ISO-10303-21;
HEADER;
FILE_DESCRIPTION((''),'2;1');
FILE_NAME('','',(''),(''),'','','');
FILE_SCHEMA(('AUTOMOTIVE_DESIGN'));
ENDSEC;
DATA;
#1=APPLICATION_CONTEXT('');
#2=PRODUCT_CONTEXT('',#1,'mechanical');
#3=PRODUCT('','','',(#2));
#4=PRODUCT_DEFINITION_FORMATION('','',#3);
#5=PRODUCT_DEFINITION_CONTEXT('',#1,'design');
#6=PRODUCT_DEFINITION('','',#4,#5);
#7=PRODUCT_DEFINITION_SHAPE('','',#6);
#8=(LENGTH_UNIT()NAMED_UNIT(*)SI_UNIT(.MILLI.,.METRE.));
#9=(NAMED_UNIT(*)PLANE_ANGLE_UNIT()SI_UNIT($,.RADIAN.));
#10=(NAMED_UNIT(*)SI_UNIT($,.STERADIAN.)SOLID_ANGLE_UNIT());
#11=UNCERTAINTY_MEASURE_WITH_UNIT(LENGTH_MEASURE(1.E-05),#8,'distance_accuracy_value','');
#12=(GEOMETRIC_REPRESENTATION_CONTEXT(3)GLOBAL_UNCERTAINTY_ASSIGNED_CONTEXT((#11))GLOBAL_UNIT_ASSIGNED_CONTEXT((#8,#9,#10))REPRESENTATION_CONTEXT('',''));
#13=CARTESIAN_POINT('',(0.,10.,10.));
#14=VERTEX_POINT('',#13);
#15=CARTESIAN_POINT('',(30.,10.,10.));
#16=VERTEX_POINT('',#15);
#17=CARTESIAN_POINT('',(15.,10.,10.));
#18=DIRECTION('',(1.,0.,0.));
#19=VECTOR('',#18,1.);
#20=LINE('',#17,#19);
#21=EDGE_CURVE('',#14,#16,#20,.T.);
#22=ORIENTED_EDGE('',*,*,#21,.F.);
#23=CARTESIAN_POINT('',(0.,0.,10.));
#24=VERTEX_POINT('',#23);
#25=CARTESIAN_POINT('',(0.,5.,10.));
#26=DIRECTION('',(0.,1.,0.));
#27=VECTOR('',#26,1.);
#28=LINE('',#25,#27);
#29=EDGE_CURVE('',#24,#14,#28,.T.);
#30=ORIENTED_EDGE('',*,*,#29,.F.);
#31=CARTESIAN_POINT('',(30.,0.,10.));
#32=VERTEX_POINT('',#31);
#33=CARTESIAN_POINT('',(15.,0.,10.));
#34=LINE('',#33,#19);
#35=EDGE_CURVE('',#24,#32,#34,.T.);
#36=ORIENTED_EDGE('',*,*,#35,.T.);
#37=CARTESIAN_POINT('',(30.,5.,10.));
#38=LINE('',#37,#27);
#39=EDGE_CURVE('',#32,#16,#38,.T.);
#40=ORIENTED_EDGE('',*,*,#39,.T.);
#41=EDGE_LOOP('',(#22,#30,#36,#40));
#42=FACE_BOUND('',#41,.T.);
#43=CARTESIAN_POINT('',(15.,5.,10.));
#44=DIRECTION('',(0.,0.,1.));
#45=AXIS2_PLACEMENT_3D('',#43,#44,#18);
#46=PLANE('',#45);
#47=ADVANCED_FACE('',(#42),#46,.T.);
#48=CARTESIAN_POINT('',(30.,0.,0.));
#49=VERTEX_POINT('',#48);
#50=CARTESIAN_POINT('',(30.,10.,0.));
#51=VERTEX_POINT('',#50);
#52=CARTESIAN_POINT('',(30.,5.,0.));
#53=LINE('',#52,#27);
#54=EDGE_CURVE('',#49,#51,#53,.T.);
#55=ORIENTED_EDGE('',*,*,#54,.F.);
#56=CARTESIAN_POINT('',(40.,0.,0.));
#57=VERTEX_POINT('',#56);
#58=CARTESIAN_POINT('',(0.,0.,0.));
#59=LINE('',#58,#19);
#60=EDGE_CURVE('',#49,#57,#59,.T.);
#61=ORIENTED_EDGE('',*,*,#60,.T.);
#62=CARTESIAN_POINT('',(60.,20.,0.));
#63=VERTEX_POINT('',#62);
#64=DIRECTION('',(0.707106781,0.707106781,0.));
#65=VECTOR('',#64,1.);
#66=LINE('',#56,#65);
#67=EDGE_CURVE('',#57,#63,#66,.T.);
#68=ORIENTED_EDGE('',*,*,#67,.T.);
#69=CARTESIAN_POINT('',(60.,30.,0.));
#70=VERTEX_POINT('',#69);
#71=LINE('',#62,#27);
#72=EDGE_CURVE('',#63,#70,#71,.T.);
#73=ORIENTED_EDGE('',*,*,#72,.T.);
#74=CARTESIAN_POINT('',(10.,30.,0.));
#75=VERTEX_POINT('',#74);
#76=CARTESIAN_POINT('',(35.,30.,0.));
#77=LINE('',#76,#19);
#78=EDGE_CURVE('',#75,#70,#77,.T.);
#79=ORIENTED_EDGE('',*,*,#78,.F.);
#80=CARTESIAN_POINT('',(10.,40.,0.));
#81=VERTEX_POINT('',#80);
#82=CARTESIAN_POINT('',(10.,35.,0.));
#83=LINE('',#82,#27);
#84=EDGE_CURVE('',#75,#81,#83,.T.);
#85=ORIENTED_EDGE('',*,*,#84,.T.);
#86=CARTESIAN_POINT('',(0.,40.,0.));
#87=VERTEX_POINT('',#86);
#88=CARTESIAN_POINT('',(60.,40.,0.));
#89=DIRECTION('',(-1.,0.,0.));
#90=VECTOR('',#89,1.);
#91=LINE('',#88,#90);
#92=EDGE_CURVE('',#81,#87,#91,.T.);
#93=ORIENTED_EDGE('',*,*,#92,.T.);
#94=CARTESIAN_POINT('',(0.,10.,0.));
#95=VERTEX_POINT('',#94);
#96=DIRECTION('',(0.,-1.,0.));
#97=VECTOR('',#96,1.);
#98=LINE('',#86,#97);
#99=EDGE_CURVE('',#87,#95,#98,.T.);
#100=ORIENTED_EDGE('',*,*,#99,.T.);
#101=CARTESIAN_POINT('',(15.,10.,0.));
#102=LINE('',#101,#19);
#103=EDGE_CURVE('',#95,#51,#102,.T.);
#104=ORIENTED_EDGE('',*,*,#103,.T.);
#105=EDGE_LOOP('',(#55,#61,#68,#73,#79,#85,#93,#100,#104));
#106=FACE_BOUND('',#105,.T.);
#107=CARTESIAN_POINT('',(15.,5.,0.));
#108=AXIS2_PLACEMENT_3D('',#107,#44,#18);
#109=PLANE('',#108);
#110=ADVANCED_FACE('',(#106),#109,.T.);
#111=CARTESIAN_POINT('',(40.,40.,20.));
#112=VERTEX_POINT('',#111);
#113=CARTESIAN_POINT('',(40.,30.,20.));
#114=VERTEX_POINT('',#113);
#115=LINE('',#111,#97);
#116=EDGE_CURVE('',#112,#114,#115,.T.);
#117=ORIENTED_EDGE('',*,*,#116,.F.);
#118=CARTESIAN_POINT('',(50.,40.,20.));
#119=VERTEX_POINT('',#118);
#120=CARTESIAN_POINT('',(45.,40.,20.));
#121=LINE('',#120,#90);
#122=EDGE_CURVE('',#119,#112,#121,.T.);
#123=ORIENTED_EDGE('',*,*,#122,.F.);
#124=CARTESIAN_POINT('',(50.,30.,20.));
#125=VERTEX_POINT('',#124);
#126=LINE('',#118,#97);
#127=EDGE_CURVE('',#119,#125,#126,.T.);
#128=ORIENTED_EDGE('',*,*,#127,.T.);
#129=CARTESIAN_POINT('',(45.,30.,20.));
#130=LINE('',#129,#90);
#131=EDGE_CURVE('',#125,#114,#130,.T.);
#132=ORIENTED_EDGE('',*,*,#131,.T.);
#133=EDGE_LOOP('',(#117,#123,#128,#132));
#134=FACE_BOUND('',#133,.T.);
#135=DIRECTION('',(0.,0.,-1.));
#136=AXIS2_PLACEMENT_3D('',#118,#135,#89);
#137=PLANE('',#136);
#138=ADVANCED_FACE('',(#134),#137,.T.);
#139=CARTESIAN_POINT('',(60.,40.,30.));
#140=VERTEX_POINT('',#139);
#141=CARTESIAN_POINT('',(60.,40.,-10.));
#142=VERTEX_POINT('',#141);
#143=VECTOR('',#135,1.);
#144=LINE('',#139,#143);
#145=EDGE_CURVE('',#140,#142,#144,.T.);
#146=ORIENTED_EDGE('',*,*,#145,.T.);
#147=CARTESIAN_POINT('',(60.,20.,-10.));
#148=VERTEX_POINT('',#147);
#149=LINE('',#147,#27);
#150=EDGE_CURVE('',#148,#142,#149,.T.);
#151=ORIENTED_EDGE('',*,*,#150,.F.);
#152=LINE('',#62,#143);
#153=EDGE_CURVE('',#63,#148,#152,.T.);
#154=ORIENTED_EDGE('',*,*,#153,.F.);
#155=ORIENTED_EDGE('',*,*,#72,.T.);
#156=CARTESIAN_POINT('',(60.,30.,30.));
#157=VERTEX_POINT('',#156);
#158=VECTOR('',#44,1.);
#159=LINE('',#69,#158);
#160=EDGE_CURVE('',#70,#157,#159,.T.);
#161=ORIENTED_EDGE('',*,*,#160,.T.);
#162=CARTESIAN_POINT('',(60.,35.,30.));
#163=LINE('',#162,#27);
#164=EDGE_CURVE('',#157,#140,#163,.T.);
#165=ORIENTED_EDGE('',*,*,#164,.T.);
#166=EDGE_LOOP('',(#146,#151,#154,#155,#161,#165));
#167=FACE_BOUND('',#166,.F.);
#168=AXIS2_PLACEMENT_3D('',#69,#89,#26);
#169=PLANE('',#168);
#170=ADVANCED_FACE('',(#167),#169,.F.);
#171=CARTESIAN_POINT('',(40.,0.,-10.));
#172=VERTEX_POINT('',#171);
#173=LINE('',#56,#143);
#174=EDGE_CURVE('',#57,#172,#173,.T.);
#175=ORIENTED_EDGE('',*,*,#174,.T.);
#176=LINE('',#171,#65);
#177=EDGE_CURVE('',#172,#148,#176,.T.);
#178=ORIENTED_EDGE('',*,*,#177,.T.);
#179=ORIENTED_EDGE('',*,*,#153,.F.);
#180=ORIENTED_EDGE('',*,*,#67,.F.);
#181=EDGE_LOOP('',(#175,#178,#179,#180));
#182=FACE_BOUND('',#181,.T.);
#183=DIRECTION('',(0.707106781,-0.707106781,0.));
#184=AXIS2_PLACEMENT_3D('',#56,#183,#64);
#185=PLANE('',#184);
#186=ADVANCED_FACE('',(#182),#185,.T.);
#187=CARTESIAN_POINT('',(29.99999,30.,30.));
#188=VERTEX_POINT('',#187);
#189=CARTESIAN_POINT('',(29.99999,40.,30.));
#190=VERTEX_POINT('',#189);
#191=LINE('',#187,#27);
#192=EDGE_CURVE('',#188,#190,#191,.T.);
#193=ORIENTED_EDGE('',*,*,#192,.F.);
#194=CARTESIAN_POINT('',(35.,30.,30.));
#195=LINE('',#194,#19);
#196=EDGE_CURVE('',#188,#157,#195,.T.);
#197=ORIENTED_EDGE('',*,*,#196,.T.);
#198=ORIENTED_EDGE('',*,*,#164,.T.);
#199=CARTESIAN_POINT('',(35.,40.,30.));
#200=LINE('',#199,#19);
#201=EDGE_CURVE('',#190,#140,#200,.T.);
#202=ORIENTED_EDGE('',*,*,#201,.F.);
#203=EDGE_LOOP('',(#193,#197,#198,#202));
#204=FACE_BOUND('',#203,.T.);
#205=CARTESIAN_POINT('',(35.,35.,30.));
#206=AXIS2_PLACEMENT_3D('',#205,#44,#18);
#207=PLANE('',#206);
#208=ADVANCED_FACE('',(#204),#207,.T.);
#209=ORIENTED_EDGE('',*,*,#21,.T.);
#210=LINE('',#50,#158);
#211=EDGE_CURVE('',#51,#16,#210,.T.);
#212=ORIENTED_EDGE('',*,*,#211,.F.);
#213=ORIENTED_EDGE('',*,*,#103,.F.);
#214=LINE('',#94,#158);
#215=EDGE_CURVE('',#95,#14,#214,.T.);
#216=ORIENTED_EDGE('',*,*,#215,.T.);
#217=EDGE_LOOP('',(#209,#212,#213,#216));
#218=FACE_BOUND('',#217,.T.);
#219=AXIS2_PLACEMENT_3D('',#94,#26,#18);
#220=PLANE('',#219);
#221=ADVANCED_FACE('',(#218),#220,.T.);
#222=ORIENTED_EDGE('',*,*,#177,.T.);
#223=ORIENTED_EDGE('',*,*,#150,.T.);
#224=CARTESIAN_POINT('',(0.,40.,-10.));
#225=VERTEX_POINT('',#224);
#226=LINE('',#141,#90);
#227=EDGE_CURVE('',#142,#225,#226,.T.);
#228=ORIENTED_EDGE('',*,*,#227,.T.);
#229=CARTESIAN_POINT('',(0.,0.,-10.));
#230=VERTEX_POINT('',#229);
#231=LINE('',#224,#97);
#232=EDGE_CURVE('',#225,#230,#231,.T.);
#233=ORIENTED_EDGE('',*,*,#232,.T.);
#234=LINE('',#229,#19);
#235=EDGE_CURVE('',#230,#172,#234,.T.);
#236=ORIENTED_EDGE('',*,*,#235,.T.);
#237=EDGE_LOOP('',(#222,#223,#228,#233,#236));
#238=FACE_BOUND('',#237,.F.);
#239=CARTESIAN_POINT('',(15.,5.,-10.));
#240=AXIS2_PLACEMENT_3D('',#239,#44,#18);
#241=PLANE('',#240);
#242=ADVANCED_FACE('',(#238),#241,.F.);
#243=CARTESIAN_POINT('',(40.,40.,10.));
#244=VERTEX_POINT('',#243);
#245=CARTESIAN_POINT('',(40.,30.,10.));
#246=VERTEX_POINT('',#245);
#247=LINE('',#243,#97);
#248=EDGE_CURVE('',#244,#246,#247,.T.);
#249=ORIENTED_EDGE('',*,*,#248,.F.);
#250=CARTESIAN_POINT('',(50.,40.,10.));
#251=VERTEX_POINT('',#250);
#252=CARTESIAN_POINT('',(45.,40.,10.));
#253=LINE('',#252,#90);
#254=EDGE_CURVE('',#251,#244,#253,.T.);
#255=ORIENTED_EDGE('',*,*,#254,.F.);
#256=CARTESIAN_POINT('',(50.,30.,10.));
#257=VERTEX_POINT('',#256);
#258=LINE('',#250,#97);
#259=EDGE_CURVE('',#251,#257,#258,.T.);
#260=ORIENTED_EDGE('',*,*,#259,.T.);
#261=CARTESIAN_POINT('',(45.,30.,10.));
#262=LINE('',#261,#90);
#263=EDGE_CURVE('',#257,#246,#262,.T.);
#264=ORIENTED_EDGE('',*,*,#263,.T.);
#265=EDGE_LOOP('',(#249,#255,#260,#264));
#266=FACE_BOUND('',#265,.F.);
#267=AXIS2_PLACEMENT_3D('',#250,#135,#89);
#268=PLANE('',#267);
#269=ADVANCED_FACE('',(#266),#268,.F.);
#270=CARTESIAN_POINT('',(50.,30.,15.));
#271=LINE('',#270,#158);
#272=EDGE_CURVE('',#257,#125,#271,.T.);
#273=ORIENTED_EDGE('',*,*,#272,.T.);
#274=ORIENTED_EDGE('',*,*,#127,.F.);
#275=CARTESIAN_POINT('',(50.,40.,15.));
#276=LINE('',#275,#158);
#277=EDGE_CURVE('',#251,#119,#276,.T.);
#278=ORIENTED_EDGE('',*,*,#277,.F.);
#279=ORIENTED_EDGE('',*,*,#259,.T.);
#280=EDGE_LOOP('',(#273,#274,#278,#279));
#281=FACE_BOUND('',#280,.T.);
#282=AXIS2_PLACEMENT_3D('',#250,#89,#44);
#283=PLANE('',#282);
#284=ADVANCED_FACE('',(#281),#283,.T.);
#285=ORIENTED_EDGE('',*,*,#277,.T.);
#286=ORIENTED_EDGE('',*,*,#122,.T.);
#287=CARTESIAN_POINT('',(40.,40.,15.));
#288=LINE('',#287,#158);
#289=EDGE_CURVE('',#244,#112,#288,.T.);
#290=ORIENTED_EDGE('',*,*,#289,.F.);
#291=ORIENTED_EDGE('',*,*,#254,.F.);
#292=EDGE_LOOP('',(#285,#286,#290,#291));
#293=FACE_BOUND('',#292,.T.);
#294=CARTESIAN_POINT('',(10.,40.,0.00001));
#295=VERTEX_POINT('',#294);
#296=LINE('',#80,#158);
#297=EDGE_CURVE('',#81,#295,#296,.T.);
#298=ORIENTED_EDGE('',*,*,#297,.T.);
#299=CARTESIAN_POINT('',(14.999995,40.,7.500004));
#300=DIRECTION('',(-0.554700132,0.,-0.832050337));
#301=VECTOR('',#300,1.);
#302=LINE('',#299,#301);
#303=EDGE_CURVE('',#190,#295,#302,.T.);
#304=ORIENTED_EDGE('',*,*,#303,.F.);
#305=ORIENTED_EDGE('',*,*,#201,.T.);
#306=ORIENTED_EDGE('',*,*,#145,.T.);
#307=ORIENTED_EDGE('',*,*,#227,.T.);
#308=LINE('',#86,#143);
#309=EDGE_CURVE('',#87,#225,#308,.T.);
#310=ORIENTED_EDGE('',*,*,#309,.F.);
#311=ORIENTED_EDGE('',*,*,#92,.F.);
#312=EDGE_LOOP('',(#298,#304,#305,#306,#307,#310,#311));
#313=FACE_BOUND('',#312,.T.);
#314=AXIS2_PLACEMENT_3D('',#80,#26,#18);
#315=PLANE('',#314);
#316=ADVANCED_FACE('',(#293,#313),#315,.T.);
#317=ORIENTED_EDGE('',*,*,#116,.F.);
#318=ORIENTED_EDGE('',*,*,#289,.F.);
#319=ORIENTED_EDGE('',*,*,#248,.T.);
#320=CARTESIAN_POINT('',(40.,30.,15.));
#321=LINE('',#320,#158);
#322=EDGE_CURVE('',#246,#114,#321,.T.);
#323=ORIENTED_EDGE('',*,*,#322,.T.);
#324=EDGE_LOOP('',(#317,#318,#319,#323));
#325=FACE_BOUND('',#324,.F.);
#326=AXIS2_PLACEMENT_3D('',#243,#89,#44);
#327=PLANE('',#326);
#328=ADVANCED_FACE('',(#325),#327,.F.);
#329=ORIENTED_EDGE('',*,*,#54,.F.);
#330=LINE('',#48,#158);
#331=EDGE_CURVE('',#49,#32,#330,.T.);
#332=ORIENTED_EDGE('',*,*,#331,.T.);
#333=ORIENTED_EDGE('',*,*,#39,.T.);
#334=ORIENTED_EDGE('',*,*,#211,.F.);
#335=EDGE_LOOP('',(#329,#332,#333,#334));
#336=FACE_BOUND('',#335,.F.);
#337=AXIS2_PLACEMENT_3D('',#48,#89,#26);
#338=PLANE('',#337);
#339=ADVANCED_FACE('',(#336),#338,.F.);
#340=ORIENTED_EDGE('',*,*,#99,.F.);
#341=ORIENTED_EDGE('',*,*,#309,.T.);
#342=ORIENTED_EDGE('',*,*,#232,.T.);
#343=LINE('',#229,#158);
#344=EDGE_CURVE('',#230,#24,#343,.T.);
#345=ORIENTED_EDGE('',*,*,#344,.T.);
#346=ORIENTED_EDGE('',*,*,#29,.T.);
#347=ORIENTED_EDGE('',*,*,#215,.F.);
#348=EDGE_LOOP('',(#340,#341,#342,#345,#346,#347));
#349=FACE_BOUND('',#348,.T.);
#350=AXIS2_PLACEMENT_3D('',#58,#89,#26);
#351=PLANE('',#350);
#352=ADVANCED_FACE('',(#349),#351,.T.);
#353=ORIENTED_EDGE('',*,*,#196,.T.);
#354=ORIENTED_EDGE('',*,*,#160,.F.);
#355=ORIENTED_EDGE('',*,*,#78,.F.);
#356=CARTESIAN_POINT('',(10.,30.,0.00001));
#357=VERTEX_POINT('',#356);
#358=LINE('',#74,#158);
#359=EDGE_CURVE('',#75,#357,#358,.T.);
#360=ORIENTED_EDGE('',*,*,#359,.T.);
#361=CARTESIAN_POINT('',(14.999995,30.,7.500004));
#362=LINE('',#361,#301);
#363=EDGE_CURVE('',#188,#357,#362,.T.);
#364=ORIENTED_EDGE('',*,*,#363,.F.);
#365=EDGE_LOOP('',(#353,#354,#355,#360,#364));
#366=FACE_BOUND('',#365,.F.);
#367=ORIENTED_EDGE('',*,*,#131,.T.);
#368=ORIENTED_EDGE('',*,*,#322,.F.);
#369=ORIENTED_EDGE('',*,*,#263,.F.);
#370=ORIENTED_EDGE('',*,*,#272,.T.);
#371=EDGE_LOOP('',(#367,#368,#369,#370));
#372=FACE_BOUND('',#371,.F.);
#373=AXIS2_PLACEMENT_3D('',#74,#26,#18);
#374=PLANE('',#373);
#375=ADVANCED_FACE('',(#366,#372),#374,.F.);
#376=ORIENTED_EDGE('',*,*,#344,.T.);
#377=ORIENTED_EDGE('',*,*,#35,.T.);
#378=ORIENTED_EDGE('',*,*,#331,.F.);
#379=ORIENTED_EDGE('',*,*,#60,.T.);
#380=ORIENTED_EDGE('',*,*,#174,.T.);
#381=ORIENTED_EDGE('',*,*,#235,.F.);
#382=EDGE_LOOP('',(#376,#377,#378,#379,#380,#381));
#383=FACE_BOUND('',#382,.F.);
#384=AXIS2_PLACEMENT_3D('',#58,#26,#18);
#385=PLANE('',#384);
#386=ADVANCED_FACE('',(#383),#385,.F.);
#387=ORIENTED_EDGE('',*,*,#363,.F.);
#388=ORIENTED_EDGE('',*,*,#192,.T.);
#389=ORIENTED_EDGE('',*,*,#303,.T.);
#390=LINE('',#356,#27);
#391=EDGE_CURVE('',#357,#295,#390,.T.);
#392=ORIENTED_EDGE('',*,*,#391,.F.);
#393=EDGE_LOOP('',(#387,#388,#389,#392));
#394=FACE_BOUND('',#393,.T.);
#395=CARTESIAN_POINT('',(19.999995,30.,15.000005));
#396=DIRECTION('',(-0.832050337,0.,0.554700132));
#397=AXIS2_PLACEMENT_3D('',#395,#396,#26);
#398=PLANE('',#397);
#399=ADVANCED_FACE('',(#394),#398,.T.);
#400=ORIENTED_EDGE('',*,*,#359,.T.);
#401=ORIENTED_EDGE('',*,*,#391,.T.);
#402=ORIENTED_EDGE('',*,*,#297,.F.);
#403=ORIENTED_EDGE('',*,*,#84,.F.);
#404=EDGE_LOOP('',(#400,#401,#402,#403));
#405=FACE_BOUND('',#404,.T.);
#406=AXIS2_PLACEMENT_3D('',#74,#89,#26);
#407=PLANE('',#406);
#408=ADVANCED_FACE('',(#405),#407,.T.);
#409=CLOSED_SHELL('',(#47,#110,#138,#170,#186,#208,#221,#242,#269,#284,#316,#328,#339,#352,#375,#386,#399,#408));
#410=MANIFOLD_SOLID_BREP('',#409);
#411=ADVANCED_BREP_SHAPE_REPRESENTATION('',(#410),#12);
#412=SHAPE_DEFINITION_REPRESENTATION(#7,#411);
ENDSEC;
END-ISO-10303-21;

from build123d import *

# Parameters (mm, degrees)
F0_W     = 30
F0_H     = 10
F0_W_2   = 50
F1_DEPTH = 10
F2_DEPTH = 10
F3_DEPTH = 30
F4_W     = 10
F4_H     = 10
F5_DEPTH = 10
F6_SIZE2 = 29.99999
F6_SIZE  = 19.99999


# Not quite as in the source:
# - a fillet or chamfer is up to 0.001 mm smaller than in the source, because OpenCascade refuses the exact size


with BuildPart() as f1:
    # F0 (on Top) → F1 (new body)
    with BuildSketch(Plane.XY):
        with Locations((15, 5)):
            Rectangle(F0_W, F0_H)
        with Locations((35, 35)):
            Rectangle(F0_W_2, F0_H)
        Polygon((30, 10), (30, 0), (40, 0), (60, 20), (60, 30), (10, 30), (10, 40), (0, 40), (0, 10), align=None)
    extrude(amount=-F1_DEPTH)

    # F0 (on Top) → F2 (join)
    with BuildSketch(Plane.XY):
        with Locations((15, 5)):
            Rectangle(F0_W, F0_H)
    extrude(amount=F2_DEPTH)

    # F0 (on Top) → F3 (join)
    with BuildSketch(Plane.XY):
        with Locations((35, 35)):
            Rectangle(F0_W_2, F0_H)
    extrude(amount=F3_DEPTH)

    # F4 (on face) → F5 (cut)
    with BuildSketch(Plane(origin=(0, 40, 0), x_dir=(-1, 0, 0), z_dir=(0, 1, 0))):
        with Locations((-45, 15)):
            Rectangle(F4_W, F4_H)
    extrude(amount=-F5_DEPTH, mode=Mode.SUBTRACT)

    # F6 (size 20 and 30 in the source; OpenCascade refuses exactly that, so slightly less here)
    f6_edges = [f1.edges().sort_by_distance(p)[0] for p in [
        (10, 35, 30),
    ]]
    f6_side = f1.faces().sort_by_distance((35, 35, 30))[0]
    chamfer(f6_edges, length=F6_SIZE, length2=F6_SIZE2, reference=f6_side)


solid = f1.part
